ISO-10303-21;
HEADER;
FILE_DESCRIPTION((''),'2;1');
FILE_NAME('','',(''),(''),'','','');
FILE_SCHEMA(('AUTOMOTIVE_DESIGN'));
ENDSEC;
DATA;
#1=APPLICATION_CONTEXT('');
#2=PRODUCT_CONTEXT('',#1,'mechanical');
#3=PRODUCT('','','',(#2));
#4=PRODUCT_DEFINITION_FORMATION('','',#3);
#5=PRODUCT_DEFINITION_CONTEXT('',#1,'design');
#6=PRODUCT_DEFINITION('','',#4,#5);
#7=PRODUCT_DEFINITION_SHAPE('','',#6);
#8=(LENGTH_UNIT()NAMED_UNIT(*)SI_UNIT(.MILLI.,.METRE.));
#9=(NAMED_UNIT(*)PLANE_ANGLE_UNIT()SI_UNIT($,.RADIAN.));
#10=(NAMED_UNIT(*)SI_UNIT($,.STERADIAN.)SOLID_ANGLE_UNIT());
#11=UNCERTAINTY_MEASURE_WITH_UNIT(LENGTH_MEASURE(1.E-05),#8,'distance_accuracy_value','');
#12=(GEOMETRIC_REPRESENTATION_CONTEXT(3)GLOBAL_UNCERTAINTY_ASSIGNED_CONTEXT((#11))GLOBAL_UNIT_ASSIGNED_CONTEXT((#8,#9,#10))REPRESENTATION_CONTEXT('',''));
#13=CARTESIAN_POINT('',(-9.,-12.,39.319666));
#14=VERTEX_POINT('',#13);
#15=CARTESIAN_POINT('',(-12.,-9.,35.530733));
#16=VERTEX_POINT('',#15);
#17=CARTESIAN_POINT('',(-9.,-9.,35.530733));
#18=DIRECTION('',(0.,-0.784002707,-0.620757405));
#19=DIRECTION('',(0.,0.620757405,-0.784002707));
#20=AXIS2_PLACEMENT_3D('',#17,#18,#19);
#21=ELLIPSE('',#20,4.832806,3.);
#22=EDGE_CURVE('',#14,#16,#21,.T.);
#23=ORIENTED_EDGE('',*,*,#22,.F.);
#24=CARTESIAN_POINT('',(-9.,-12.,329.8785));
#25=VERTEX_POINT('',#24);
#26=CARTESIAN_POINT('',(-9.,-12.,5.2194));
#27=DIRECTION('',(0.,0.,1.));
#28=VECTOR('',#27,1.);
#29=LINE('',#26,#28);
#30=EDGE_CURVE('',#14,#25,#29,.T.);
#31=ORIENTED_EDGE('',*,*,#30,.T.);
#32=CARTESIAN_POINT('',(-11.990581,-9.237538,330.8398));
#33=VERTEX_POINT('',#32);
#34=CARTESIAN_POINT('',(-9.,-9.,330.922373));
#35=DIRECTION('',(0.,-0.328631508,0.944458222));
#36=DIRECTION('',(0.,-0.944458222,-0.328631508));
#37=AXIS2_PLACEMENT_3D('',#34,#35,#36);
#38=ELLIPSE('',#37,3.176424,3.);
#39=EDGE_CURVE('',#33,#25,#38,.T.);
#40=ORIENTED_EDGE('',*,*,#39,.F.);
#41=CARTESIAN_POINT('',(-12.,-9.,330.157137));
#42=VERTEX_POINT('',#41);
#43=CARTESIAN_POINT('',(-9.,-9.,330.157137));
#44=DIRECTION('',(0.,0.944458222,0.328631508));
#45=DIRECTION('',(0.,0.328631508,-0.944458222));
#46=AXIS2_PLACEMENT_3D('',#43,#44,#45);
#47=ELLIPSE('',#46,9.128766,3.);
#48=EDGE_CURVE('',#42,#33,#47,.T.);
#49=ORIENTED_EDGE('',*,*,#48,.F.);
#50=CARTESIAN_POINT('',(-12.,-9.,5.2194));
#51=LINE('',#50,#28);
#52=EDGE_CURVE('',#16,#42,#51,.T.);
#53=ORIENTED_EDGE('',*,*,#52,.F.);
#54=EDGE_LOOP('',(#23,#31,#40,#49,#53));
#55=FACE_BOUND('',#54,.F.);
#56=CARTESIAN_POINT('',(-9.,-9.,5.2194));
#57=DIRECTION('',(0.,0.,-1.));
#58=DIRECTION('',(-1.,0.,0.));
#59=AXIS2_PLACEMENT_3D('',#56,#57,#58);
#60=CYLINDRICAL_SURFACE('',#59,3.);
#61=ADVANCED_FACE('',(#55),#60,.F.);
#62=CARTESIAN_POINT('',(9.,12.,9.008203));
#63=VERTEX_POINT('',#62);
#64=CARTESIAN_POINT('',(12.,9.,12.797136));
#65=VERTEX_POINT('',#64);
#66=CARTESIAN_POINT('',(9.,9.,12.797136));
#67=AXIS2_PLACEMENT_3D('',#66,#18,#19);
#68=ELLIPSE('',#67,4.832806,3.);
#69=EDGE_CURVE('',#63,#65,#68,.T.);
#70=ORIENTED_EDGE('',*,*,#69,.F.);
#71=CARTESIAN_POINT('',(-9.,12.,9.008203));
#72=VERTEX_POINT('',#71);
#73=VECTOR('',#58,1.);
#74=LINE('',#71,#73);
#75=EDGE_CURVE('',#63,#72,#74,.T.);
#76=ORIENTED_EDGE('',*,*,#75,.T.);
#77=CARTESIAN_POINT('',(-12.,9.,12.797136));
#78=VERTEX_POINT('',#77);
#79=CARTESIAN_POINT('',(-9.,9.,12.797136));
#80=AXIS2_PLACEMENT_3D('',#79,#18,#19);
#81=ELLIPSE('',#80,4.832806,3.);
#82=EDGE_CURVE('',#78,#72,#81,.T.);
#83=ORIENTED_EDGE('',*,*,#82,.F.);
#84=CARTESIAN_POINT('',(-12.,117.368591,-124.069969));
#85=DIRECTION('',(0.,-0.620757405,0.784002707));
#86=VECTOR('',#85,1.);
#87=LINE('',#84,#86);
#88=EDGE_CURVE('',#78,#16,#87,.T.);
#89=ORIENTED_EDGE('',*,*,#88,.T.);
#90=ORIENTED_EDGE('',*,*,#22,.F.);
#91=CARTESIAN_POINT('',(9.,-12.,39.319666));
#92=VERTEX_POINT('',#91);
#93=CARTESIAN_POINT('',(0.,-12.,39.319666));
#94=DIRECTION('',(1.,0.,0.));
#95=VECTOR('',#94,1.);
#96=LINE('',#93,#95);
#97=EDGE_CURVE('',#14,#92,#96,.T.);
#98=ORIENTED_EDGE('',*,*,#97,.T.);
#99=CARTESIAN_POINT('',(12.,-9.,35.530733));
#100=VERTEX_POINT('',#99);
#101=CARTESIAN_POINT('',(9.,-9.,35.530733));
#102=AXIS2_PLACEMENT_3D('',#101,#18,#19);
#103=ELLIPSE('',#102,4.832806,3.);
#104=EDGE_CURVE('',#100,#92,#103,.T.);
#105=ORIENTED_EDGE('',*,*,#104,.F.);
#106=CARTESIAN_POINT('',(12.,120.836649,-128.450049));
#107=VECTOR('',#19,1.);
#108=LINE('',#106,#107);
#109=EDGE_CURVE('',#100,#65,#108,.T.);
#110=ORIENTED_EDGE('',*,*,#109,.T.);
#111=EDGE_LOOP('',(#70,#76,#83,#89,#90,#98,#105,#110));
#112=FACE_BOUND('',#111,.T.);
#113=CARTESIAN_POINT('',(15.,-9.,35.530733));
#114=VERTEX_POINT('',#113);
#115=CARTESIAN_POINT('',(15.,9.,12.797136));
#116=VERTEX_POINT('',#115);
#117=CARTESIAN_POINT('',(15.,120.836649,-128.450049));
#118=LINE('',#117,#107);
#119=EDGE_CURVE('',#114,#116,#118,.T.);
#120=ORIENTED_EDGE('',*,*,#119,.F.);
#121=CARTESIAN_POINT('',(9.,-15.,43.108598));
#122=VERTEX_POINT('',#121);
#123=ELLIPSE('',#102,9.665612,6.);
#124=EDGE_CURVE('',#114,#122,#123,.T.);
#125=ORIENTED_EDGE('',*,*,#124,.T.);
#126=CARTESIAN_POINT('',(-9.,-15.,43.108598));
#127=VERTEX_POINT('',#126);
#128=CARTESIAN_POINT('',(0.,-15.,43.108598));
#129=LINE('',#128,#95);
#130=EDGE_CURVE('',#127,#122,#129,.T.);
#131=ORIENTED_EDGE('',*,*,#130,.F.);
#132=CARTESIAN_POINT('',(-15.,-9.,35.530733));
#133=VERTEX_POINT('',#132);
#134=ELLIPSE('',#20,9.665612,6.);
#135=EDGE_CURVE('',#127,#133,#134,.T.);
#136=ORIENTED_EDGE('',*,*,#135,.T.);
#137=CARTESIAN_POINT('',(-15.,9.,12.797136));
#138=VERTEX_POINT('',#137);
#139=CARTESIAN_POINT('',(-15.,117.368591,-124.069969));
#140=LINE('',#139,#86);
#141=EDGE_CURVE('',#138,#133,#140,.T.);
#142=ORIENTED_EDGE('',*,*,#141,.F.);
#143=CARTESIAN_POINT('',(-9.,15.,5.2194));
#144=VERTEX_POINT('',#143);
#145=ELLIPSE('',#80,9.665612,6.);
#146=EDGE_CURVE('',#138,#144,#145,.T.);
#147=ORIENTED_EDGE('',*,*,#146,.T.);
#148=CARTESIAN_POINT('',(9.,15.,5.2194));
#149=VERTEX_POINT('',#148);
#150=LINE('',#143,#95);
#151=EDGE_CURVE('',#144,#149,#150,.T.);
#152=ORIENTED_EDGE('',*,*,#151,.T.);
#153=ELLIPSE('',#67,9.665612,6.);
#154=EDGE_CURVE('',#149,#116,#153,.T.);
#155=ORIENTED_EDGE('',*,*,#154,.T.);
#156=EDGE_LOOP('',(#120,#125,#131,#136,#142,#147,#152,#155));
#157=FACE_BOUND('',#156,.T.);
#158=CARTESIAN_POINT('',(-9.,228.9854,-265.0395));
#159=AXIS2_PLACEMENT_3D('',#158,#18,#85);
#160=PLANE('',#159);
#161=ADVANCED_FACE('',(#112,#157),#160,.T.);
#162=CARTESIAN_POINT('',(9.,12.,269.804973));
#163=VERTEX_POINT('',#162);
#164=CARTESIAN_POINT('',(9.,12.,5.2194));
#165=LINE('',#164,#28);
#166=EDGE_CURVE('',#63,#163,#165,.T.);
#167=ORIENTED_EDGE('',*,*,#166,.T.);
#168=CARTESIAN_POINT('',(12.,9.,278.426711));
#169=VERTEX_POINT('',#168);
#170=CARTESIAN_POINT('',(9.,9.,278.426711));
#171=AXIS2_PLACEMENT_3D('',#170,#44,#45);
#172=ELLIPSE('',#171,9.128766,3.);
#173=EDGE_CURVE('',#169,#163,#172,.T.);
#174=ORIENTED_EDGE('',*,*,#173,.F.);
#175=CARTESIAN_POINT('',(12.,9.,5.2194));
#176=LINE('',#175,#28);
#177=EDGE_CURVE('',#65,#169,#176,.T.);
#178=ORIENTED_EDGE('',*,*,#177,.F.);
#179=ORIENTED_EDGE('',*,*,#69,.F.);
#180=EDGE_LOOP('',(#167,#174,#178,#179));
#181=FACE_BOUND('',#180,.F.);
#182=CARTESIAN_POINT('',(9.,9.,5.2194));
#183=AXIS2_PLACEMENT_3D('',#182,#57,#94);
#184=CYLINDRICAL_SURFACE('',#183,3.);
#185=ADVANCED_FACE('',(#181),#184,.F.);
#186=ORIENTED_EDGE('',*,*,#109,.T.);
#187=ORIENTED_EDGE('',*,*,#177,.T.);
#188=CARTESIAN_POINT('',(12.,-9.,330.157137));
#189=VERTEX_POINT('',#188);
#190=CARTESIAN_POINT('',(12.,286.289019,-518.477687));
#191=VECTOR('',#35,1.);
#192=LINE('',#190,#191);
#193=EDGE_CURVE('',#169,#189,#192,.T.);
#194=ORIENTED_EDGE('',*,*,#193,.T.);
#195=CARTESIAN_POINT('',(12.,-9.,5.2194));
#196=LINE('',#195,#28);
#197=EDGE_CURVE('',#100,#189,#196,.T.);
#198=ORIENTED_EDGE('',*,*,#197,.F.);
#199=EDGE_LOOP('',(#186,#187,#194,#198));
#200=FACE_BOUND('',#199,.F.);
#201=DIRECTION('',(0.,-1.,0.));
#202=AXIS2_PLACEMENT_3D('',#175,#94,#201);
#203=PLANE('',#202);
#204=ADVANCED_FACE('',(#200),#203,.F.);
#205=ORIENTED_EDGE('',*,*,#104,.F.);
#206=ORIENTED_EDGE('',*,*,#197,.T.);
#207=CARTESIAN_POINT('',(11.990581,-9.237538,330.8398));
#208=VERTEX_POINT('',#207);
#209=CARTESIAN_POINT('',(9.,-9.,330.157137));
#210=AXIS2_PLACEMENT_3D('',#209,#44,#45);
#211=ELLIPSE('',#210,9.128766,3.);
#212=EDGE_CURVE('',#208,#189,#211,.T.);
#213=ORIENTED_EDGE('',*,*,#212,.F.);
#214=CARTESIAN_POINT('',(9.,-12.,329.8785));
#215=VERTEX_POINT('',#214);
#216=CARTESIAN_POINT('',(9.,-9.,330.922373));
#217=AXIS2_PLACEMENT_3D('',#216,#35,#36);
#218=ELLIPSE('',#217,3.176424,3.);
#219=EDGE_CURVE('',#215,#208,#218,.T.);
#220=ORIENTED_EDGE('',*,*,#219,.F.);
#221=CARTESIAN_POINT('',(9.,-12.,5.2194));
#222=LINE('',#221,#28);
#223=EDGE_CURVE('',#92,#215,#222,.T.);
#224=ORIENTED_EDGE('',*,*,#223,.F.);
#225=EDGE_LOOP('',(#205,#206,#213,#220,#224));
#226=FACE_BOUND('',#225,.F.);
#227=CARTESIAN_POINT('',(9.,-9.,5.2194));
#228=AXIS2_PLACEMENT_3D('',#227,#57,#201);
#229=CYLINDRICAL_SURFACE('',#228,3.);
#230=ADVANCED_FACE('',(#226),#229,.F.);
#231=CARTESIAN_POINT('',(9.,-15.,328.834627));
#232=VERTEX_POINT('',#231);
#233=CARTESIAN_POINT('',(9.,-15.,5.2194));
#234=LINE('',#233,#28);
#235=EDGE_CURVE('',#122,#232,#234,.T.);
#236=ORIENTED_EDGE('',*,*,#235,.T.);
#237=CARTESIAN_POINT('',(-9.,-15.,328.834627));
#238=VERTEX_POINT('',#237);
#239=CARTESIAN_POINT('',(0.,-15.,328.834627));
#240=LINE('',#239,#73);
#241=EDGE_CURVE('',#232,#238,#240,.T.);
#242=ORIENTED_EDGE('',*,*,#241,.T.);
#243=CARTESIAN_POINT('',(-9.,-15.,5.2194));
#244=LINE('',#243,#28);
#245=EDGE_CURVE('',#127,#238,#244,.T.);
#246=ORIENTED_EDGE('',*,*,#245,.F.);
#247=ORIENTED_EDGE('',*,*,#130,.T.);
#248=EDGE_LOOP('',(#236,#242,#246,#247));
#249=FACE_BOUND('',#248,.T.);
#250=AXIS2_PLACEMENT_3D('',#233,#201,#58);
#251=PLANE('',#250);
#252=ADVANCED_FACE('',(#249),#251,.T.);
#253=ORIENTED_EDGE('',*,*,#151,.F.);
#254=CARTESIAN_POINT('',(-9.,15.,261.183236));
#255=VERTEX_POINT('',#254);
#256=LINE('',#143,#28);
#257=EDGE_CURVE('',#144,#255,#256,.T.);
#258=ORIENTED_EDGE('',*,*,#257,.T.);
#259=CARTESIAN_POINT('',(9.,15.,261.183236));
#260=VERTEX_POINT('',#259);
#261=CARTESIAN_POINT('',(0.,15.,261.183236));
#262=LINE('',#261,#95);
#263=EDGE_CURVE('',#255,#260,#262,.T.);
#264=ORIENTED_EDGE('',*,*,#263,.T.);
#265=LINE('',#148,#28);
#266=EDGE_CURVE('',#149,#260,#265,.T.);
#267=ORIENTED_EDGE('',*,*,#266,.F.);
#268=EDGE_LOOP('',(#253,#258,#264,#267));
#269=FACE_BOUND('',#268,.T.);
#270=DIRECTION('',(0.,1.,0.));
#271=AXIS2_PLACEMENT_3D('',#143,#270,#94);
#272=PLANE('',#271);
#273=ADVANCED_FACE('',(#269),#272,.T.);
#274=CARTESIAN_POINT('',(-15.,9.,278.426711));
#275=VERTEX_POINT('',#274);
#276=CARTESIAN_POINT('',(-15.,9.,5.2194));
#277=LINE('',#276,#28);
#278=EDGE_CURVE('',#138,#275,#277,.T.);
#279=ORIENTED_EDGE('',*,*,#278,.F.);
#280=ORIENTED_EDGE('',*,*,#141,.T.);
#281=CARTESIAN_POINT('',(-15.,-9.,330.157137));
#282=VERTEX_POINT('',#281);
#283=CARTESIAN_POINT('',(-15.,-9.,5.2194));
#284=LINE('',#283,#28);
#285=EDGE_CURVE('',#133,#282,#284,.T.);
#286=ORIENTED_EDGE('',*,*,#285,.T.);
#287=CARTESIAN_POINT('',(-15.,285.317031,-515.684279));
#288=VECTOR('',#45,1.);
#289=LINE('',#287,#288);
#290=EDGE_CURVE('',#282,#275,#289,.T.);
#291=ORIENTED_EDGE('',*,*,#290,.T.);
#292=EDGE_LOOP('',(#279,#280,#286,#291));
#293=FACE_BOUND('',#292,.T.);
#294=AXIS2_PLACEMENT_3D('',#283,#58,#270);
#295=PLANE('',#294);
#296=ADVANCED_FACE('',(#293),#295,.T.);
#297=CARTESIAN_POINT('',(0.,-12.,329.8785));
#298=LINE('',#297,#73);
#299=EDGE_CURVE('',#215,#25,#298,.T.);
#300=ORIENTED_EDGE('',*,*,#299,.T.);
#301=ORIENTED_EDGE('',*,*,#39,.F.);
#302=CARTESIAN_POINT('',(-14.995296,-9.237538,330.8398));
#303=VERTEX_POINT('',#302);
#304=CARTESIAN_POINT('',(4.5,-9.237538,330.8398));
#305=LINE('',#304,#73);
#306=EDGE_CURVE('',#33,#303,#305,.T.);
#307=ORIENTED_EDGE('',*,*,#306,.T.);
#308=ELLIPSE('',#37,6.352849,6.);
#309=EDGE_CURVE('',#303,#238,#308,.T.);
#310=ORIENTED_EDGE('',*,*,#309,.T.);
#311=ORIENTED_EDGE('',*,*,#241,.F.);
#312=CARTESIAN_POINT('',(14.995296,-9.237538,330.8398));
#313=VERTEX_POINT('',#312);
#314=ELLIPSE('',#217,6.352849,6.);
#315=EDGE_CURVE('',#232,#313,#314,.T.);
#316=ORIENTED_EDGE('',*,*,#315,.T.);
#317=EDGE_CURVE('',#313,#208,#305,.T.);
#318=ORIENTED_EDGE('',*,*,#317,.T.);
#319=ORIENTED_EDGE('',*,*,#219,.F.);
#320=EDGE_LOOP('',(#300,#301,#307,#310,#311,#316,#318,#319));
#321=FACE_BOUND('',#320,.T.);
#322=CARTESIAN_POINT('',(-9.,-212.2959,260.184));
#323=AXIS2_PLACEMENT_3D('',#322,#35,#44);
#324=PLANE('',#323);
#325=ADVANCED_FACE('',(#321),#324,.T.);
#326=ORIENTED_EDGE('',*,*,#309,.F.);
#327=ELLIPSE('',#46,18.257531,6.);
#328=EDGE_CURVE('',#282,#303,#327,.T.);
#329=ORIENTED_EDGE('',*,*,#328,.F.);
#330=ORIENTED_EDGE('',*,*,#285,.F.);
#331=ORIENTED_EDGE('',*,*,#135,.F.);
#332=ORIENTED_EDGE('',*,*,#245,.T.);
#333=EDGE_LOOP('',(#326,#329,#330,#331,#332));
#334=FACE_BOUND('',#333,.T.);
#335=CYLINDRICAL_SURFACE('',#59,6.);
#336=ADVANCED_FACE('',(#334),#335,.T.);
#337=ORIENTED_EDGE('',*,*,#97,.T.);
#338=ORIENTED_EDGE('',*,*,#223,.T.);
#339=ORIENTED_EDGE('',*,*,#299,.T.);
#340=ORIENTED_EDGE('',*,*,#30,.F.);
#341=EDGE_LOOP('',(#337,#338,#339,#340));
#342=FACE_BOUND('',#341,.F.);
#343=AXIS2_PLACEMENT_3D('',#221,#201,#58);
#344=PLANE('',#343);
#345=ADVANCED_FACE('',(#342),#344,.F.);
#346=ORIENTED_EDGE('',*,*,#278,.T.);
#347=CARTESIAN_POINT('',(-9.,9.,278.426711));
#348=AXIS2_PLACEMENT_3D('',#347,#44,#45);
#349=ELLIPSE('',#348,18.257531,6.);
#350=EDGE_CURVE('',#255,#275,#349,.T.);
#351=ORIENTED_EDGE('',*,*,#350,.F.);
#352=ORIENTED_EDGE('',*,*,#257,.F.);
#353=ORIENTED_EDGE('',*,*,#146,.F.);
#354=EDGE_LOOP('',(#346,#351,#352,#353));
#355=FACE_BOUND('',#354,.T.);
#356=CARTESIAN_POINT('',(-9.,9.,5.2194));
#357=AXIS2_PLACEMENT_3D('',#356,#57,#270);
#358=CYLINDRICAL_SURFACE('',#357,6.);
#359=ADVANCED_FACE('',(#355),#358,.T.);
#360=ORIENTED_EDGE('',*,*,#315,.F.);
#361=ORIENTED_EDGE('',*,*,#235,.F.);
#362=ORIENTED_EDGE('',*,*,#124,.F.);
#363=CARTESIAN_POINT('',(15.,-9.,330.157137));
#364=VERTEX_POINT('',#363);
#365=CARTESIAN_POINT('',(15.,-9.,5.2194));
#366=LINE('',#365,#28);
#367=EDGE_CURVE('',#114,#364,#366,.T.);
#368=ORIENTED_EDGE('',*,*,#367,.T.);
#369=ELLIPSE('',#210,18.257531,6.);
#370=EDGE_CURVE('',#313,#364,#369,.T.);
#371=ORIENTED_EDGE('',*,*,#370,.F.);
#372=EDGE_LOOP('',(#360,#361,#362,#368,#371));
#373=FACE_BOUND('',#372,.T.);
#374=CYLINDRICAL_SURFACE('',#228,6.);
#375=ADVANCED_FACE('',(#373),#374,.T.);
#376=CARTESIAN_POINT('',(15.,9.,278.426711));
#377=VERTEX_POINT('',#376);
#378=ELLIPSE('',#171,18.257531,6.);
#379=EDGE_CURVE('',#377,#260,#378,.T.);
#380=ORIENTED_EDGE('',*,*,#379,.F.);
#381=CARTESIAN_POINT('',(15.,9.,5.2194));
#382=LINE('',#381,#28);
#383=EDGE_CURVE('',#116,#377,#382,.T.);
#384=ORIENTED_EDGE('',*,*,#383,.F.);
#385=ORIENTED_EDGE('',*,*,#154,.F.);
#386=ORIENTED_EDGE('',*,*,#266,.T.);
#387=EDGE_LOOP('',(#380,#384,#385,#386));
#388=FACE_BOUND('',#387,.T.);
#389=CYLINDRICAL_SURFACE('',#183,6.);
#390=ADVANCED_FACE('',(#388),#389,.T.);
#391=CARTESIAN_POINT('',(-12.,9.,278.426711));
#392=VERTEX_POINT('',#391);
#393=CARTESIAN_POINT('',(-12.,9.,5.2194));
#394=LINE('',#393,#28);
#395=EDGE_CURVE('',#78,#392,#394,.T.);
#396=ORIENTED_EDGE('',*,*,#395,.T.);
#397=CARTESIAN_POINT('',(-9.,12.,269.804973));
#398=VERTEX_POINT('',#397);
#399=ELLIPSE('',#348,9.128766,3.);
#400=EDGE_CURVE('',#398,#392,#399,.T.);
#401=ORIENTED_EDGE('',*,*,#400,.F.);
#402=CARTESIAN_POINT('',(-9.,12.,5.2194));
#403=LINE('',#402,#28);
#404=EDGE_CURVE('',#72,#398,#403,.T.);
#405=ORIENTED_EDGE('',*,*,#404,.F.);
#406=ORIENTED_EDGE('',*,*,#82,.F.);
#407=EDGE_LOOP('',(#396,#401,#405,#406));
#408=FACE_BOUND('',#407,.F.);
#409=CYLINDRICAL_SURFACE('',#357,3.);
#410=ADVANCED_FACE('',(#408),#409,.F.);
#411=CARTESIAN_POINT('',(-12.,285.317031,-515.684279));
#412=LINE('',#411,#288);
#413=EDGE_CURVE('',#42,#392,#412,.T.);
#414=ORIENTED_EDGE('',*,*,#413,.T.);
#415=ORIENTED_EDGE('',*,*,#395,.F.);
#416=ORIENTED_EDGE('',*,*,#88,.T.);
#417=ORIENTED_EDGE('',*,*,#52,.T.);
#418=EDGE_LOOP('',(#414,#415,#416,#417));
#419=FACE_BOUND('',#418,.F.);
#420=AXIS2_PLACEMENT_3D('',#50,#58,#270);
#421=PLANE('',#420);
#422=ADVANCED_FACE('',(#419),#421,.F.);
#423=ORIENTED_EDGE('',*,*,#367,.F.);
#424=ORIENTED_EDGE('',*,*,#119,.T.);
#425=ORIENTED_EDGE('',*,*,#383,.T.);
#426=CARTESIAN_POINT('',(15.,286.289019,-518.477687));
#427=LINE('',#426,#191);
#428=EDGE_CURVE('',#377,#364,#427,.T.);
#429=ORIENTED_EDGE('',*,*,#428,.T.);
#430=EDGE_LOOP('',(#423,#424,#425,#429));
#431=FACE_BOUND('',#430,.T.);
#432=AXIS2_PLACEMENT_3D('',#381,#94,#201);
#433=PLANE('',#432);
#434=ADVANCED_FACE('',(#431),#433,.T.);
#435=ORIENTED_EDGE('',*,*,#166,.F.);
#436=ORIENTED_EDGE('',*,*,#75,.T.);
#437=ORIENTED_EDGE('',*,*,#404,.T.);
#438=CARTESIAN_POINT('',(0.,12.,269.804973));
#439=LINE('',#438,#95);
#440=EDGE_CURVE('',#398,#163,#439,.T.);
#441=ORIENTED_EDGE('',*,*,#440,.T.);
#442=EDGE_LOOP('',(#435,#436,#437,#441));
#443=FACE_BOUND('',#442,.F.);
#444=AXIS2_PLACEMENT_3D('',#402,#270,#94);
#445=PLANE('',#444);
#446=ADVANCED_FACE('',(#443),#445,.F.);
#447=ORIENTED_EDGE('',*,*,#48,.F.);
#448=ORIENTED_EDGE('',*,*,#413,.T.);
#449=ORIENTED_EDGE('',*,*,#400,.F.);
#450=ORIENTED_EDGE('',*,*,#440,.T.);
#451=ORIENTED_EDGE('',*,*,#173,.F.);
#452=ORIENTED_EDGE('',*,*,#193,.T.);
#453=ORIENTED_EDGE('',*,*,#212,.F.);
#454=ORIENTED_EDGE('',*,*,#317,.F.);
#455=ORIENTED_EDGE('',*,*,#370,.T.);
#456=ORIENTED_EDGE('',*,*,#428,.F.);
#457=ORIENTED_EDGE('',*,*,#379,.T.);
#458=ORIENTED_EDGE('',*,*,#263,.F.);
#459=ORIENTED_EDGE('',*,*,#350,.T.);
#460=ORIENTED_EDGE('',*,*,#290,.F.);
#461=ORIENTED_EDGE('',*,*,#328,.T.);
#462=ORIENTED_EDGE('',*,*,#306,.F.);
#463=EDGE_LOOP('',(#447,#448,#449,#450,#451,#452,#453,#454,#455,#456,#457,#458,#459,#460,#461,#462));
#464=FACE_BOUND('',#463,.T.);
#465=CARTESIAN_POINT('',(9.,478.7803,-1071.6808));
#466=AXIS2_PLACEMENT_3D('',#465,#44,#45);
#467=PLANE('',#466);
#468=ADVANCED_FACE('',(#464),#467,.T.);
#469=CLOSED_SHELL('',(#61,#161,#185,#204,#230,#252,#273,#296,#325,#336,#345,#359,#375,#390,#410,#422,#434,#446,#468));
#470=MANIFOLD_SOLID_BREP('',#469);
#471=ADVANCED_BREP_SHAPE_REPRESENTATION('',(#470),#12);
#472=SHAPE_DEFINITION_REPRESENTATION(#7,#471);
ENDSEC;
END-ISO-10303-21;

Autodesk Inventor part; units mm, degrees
ref_plane "Start Plane" through (0, 0, 5.2194) normal (0, 0, 1) x (1, 0, 0)
ref_plane "End Plane" through (0, 0, 330.8397) normal (0, 0, 1) x (1, 0, 0)
sketch "Sketch" plane through (0, 0, 0) normal (0, 0, 1) x (1, 0, 0)
  line L0 (-15, -9) -> (-15, 9)
  line L1 (-9, 15) -> (9, 15)
  line L2 (15, 9) -> (15, -9)
  line L3 (9, -15) -> (-9, -15)
  arc A0 (-15, -9) -> (-9, -15) centre (-9, -9) ccw
  arc A1 (-9, 15) -> (-15, 9) centre (-9, 9) ccw
  arc A2 (15, 9) -> (9, 15) centre (9, 9) ccw
  arc A3 (9, -15) -> (15, -9) centre (9, -9) ccw
  arc A4 (-9, 12) -> (-12, 9) centre (-9, 9) ccw
  line L4 (-9, 12) -> (9, 12)
  arc A5 (12, 9) -> (9, 12) centre (9, 9) ccw
  line L5 (12, 9) -> (12, -9)
  arc A6 (9, -12) -> (12, -9) centre (9, -9) ccw
  line L6 (9, -12) -> (-9, -12)
  arc A7 (-12, -9) -> (-9, -12) centre (-9, -9) ccw
  line L7 (-12, -9) -> (-12, 9)
  line L8 (0, 22.7397) -> (0, -22.7397) construction
  line L9 (-22.7397, 0) -> (22.7397, 0) construction
  dimension "d7" = 6
  dimension "d10" = 30
  dimension "d11" = 30
  dimension "d12" = 3
  dimension "d15" = 15
  dimension "d16" = 15
extrude "Body" add sketch "Sketch" along normal up to surface (325.6204 mm away) from surface at 5.2194
sketch "Sketch3" plane through (0, 0, 0) normal (0, 0, 1) x (1, 0, 0)
  line L0 (0, 0) -> (10, 0)
ref_plane "Work Plane3" through (0, 0, 0) normal (0, -1, 0) x (1, 0, 0)
ref_plane "Work Plane4" through (9, 478.7803, -1071.6808) normal (0, 0.9444582, 0.3286315) x (1, 0, 0)
split "Split1" plane through (9, 478.7803, -1071.6808) removes the side toward (0, 0.9444582, 0.3286315)
ref_plane "Work Plane5" through (-9, 228.9854, -265.0395) normal (0, -0.7840027, -0.6207574) x (1, 0, 0)
split "Split2" plane through (-9, 228.9854, -265.0395) removes the side toward (0, -0.7840027, -0.6207574)
ref_plane "Work Plane6" through (-9, -212.2959, 260.184) normal (0, -0.3286315, 0.9444582) x (1, 0, 0)
split "Split3" plane through (-9, -212.2959, 260.184) removes the side toward (0, -0.3286315, 0.9444582)
sketch "Sketch4" plane through (0, 0, 0) normal (0, -1, 0) x (1, 0, 0)
  line L0 (-2, 5.2194) -> (12, 5.2194) projected
  line L1 (-2, 330.8397) -> (12, 330.8397) projected
  dimension "d18" = 325.6204
equation "\"d7\" = G_IR"
equation "\"d10\" = G_H"
equation "\"d11\" = G_W"
equation "\"d12\" = G_T"
equation "\"d15\" = 0.5 * d10"
equation "\"d16\" = 0.5 * d11"
equation "\"d3\" = G_L"
equation "\"G_W\" = 30"
equation "\"G_H\" = 30"
equation "\"G_T\" = 3"
equation "\"G_IR\" = 6"
equation "\"G_L\" = d18"
equation "\"G_OFFSET_START\" = -5.21936"
equation "\"G_OFFSET_END\" = -19.09635"
equation "\"d13\" = -G_OFFSET_START"
equation "\"d14\" = G_OFFSET_END + B_L"
equation "\"B_L\" = 349.93607"
properties part number "DIN EN 10219-2 - 30 x 30 x 3  - 325.62" material "Steel, Mild"
